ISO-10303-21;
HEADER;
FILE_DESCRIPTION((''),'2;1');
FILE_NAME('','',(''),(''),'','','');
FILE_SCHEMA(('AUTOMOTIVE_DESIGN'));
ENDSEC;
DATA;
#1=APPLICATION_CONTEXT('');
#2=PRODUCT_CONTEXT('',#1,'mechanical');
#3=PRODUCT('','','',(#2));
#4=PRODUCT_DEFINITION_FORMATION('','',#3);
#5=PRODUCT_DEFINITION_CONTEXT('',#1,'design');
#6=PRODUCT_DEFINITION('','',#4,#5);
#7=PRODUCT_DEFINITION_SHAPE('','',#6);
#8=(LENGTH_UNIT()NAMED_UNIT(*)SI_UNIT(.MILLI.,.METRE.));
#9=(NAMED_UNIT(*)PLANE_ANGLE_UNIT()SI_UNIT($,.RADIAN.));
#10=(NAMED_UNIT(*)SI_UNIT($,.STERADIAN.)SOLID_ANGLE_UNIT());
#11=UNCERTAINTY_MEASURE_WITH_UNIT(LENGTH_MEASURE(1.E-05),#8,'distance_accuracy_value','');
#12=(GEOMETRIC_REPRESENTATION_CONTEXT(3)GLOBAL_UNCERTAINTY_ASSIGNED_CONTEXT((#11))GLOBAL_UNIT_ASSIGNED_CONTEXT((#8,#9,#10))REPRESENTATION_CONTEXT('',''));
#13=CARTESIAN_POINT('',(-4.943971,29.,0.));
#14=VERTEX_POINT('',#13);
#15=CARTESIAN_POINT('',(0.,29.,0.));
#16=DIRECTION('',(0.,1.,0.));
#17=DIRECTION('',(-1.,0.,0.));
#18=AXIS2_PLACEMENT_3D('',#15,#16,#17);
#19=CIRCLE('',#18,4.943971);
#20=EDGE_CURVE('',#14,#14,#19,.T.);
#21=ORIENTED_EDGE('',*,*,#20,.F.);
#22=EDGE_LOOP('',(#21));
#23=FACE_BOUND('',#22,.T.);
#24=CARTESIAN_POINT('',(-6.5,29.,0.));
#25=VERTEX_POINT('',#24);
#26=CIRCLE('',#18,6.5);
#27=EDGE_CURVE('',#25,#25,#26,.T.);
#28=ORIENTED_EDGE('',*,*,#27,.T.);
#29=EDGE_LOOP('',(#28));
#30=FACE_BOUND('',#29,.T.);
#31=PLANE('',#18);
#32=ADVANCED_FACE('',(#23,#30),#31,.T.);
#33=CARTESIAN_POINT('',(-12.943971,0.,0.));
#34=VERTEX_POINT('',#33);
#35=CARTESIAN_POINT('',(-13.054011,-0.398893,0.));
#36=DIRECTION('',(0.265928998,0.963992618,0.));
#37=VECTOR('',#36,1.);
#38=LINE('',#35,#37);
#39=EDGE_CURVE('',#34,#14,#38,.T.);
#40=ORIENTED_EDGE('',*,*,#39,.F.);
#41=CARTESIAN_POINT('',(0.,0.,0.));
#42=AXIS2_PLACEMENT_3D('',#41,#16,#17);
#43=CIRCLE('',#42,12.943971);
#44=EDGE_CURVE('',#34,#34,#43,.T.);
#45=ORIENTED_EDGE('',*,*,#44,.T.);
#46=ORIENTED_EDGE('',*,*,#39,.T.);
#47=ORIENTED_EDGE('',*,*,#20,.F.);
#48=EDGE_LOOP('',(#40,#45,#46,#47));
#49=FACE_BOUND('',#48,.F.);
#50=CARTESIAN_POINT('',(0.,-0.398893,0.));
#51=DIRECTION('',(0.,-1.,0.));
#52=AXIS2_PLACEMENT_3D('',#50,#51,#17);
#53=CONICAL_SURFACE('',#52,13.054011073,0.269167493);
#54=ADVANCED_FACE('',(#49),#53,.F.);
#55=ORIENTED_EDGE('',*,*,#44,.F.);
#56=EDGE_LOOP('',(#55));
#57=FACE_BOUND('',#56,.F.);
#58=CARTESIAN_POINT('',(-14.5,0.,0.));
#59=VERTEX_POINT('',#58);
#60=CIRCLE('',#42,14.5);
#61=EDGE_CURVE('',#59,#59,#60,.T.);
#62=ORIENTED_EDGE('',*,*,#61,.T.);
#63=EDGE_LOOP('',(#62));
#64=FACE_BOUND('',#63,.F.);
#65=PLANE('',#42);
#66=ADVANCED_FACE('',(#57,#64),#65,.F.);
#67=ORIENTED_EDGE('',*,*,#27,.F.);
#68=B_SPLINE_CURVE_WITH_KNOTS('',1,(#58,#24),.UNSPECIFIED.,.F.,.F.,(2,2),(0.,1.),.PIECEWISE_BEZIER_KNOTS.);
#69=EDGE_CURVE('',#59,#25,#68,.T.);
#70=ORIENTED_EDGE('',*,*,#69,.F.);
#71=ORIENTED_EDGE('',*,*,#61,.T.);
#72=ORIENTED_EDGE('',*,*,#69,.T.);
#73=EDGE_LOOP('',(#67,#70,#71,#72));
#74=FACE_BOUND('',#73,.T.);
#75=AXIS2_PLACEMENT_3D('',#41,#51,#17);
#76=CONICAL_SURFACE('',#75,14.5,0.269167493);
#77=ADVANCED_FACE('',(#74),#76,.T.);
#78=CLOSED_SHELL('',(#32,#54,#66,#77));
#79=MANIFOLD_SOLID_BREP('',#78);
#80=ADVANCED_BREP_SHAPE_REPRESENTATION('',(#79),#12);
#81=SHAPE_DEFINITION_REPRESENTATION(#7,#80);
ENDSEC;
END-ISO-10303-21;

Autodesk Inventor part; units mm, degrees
ref_plane "YZ Plane" through (0, 0, 0) normal (1, 0, 0) x (0, 1, 0)
ref_plane "XY Plane" through (0, 0, 0) normal (0, 0, 1) x (1, 0, 0)
sketch "Szkic6" plane through (0, 0, 0) normal (0, 1, 0) x (-1, 0, 0)
  circle A0 centre (0, 0) radius 14.5
  dimension "d33" = 29
ref_plane "Płaszczyzna konstrukcyjna1" through (0, 29, 0) normal (0, 1, 0) x (-1, 0, 0)
sketch "Szkic7" plane through (0, 29, 0) normal (0, 1, 0) x (-1, 0, 0)
  circle A0 centre (0, 0) radius 6.5
  dimension "d35" = 13
loft "Wyciągnięcie złożone1" add profiles "Szkic6", "Szkic7"
shell "Skorupa1" thickness 1.5 removed faces 2 at (-1.6847, 29, 1.9553) at (1.052, 0, -3.5603)
equation "\"d33\" = OD1"
equation "\"d35\" = OD2"
equation "\"d52\" = THK"
equation "\"SzerokośćGięciaPodcięcia\" = Grubość"
equation "\"RozmiarPodcięciaNarożnika\" = 4 * Grubość"
equation "\"PromieńPrzejścia\" = PromieńGięcia"
equation "\"Rozmiar_promienia_Jacobiego\" = PromieńGięcia"
equation "\"Wielk_odstępu\" = Grubość"
equation "\"d2\" = PromieńGięcia"
equation "\"d23\" = PromieńGięcia"
equation "\"OD1\" = 29"
equation "\"OD2\" = 13"
equation "\"L\" = 29"
equation "\"THK\" = 1.5"
equation "\"d34\" = L"
equation "\"Grubość\" = 1.5"
equation "\"PromieńGięcia\" = 3"
properties part number "Redukcja symetryczna Ø29x13x1,5 L=29" material "304"
